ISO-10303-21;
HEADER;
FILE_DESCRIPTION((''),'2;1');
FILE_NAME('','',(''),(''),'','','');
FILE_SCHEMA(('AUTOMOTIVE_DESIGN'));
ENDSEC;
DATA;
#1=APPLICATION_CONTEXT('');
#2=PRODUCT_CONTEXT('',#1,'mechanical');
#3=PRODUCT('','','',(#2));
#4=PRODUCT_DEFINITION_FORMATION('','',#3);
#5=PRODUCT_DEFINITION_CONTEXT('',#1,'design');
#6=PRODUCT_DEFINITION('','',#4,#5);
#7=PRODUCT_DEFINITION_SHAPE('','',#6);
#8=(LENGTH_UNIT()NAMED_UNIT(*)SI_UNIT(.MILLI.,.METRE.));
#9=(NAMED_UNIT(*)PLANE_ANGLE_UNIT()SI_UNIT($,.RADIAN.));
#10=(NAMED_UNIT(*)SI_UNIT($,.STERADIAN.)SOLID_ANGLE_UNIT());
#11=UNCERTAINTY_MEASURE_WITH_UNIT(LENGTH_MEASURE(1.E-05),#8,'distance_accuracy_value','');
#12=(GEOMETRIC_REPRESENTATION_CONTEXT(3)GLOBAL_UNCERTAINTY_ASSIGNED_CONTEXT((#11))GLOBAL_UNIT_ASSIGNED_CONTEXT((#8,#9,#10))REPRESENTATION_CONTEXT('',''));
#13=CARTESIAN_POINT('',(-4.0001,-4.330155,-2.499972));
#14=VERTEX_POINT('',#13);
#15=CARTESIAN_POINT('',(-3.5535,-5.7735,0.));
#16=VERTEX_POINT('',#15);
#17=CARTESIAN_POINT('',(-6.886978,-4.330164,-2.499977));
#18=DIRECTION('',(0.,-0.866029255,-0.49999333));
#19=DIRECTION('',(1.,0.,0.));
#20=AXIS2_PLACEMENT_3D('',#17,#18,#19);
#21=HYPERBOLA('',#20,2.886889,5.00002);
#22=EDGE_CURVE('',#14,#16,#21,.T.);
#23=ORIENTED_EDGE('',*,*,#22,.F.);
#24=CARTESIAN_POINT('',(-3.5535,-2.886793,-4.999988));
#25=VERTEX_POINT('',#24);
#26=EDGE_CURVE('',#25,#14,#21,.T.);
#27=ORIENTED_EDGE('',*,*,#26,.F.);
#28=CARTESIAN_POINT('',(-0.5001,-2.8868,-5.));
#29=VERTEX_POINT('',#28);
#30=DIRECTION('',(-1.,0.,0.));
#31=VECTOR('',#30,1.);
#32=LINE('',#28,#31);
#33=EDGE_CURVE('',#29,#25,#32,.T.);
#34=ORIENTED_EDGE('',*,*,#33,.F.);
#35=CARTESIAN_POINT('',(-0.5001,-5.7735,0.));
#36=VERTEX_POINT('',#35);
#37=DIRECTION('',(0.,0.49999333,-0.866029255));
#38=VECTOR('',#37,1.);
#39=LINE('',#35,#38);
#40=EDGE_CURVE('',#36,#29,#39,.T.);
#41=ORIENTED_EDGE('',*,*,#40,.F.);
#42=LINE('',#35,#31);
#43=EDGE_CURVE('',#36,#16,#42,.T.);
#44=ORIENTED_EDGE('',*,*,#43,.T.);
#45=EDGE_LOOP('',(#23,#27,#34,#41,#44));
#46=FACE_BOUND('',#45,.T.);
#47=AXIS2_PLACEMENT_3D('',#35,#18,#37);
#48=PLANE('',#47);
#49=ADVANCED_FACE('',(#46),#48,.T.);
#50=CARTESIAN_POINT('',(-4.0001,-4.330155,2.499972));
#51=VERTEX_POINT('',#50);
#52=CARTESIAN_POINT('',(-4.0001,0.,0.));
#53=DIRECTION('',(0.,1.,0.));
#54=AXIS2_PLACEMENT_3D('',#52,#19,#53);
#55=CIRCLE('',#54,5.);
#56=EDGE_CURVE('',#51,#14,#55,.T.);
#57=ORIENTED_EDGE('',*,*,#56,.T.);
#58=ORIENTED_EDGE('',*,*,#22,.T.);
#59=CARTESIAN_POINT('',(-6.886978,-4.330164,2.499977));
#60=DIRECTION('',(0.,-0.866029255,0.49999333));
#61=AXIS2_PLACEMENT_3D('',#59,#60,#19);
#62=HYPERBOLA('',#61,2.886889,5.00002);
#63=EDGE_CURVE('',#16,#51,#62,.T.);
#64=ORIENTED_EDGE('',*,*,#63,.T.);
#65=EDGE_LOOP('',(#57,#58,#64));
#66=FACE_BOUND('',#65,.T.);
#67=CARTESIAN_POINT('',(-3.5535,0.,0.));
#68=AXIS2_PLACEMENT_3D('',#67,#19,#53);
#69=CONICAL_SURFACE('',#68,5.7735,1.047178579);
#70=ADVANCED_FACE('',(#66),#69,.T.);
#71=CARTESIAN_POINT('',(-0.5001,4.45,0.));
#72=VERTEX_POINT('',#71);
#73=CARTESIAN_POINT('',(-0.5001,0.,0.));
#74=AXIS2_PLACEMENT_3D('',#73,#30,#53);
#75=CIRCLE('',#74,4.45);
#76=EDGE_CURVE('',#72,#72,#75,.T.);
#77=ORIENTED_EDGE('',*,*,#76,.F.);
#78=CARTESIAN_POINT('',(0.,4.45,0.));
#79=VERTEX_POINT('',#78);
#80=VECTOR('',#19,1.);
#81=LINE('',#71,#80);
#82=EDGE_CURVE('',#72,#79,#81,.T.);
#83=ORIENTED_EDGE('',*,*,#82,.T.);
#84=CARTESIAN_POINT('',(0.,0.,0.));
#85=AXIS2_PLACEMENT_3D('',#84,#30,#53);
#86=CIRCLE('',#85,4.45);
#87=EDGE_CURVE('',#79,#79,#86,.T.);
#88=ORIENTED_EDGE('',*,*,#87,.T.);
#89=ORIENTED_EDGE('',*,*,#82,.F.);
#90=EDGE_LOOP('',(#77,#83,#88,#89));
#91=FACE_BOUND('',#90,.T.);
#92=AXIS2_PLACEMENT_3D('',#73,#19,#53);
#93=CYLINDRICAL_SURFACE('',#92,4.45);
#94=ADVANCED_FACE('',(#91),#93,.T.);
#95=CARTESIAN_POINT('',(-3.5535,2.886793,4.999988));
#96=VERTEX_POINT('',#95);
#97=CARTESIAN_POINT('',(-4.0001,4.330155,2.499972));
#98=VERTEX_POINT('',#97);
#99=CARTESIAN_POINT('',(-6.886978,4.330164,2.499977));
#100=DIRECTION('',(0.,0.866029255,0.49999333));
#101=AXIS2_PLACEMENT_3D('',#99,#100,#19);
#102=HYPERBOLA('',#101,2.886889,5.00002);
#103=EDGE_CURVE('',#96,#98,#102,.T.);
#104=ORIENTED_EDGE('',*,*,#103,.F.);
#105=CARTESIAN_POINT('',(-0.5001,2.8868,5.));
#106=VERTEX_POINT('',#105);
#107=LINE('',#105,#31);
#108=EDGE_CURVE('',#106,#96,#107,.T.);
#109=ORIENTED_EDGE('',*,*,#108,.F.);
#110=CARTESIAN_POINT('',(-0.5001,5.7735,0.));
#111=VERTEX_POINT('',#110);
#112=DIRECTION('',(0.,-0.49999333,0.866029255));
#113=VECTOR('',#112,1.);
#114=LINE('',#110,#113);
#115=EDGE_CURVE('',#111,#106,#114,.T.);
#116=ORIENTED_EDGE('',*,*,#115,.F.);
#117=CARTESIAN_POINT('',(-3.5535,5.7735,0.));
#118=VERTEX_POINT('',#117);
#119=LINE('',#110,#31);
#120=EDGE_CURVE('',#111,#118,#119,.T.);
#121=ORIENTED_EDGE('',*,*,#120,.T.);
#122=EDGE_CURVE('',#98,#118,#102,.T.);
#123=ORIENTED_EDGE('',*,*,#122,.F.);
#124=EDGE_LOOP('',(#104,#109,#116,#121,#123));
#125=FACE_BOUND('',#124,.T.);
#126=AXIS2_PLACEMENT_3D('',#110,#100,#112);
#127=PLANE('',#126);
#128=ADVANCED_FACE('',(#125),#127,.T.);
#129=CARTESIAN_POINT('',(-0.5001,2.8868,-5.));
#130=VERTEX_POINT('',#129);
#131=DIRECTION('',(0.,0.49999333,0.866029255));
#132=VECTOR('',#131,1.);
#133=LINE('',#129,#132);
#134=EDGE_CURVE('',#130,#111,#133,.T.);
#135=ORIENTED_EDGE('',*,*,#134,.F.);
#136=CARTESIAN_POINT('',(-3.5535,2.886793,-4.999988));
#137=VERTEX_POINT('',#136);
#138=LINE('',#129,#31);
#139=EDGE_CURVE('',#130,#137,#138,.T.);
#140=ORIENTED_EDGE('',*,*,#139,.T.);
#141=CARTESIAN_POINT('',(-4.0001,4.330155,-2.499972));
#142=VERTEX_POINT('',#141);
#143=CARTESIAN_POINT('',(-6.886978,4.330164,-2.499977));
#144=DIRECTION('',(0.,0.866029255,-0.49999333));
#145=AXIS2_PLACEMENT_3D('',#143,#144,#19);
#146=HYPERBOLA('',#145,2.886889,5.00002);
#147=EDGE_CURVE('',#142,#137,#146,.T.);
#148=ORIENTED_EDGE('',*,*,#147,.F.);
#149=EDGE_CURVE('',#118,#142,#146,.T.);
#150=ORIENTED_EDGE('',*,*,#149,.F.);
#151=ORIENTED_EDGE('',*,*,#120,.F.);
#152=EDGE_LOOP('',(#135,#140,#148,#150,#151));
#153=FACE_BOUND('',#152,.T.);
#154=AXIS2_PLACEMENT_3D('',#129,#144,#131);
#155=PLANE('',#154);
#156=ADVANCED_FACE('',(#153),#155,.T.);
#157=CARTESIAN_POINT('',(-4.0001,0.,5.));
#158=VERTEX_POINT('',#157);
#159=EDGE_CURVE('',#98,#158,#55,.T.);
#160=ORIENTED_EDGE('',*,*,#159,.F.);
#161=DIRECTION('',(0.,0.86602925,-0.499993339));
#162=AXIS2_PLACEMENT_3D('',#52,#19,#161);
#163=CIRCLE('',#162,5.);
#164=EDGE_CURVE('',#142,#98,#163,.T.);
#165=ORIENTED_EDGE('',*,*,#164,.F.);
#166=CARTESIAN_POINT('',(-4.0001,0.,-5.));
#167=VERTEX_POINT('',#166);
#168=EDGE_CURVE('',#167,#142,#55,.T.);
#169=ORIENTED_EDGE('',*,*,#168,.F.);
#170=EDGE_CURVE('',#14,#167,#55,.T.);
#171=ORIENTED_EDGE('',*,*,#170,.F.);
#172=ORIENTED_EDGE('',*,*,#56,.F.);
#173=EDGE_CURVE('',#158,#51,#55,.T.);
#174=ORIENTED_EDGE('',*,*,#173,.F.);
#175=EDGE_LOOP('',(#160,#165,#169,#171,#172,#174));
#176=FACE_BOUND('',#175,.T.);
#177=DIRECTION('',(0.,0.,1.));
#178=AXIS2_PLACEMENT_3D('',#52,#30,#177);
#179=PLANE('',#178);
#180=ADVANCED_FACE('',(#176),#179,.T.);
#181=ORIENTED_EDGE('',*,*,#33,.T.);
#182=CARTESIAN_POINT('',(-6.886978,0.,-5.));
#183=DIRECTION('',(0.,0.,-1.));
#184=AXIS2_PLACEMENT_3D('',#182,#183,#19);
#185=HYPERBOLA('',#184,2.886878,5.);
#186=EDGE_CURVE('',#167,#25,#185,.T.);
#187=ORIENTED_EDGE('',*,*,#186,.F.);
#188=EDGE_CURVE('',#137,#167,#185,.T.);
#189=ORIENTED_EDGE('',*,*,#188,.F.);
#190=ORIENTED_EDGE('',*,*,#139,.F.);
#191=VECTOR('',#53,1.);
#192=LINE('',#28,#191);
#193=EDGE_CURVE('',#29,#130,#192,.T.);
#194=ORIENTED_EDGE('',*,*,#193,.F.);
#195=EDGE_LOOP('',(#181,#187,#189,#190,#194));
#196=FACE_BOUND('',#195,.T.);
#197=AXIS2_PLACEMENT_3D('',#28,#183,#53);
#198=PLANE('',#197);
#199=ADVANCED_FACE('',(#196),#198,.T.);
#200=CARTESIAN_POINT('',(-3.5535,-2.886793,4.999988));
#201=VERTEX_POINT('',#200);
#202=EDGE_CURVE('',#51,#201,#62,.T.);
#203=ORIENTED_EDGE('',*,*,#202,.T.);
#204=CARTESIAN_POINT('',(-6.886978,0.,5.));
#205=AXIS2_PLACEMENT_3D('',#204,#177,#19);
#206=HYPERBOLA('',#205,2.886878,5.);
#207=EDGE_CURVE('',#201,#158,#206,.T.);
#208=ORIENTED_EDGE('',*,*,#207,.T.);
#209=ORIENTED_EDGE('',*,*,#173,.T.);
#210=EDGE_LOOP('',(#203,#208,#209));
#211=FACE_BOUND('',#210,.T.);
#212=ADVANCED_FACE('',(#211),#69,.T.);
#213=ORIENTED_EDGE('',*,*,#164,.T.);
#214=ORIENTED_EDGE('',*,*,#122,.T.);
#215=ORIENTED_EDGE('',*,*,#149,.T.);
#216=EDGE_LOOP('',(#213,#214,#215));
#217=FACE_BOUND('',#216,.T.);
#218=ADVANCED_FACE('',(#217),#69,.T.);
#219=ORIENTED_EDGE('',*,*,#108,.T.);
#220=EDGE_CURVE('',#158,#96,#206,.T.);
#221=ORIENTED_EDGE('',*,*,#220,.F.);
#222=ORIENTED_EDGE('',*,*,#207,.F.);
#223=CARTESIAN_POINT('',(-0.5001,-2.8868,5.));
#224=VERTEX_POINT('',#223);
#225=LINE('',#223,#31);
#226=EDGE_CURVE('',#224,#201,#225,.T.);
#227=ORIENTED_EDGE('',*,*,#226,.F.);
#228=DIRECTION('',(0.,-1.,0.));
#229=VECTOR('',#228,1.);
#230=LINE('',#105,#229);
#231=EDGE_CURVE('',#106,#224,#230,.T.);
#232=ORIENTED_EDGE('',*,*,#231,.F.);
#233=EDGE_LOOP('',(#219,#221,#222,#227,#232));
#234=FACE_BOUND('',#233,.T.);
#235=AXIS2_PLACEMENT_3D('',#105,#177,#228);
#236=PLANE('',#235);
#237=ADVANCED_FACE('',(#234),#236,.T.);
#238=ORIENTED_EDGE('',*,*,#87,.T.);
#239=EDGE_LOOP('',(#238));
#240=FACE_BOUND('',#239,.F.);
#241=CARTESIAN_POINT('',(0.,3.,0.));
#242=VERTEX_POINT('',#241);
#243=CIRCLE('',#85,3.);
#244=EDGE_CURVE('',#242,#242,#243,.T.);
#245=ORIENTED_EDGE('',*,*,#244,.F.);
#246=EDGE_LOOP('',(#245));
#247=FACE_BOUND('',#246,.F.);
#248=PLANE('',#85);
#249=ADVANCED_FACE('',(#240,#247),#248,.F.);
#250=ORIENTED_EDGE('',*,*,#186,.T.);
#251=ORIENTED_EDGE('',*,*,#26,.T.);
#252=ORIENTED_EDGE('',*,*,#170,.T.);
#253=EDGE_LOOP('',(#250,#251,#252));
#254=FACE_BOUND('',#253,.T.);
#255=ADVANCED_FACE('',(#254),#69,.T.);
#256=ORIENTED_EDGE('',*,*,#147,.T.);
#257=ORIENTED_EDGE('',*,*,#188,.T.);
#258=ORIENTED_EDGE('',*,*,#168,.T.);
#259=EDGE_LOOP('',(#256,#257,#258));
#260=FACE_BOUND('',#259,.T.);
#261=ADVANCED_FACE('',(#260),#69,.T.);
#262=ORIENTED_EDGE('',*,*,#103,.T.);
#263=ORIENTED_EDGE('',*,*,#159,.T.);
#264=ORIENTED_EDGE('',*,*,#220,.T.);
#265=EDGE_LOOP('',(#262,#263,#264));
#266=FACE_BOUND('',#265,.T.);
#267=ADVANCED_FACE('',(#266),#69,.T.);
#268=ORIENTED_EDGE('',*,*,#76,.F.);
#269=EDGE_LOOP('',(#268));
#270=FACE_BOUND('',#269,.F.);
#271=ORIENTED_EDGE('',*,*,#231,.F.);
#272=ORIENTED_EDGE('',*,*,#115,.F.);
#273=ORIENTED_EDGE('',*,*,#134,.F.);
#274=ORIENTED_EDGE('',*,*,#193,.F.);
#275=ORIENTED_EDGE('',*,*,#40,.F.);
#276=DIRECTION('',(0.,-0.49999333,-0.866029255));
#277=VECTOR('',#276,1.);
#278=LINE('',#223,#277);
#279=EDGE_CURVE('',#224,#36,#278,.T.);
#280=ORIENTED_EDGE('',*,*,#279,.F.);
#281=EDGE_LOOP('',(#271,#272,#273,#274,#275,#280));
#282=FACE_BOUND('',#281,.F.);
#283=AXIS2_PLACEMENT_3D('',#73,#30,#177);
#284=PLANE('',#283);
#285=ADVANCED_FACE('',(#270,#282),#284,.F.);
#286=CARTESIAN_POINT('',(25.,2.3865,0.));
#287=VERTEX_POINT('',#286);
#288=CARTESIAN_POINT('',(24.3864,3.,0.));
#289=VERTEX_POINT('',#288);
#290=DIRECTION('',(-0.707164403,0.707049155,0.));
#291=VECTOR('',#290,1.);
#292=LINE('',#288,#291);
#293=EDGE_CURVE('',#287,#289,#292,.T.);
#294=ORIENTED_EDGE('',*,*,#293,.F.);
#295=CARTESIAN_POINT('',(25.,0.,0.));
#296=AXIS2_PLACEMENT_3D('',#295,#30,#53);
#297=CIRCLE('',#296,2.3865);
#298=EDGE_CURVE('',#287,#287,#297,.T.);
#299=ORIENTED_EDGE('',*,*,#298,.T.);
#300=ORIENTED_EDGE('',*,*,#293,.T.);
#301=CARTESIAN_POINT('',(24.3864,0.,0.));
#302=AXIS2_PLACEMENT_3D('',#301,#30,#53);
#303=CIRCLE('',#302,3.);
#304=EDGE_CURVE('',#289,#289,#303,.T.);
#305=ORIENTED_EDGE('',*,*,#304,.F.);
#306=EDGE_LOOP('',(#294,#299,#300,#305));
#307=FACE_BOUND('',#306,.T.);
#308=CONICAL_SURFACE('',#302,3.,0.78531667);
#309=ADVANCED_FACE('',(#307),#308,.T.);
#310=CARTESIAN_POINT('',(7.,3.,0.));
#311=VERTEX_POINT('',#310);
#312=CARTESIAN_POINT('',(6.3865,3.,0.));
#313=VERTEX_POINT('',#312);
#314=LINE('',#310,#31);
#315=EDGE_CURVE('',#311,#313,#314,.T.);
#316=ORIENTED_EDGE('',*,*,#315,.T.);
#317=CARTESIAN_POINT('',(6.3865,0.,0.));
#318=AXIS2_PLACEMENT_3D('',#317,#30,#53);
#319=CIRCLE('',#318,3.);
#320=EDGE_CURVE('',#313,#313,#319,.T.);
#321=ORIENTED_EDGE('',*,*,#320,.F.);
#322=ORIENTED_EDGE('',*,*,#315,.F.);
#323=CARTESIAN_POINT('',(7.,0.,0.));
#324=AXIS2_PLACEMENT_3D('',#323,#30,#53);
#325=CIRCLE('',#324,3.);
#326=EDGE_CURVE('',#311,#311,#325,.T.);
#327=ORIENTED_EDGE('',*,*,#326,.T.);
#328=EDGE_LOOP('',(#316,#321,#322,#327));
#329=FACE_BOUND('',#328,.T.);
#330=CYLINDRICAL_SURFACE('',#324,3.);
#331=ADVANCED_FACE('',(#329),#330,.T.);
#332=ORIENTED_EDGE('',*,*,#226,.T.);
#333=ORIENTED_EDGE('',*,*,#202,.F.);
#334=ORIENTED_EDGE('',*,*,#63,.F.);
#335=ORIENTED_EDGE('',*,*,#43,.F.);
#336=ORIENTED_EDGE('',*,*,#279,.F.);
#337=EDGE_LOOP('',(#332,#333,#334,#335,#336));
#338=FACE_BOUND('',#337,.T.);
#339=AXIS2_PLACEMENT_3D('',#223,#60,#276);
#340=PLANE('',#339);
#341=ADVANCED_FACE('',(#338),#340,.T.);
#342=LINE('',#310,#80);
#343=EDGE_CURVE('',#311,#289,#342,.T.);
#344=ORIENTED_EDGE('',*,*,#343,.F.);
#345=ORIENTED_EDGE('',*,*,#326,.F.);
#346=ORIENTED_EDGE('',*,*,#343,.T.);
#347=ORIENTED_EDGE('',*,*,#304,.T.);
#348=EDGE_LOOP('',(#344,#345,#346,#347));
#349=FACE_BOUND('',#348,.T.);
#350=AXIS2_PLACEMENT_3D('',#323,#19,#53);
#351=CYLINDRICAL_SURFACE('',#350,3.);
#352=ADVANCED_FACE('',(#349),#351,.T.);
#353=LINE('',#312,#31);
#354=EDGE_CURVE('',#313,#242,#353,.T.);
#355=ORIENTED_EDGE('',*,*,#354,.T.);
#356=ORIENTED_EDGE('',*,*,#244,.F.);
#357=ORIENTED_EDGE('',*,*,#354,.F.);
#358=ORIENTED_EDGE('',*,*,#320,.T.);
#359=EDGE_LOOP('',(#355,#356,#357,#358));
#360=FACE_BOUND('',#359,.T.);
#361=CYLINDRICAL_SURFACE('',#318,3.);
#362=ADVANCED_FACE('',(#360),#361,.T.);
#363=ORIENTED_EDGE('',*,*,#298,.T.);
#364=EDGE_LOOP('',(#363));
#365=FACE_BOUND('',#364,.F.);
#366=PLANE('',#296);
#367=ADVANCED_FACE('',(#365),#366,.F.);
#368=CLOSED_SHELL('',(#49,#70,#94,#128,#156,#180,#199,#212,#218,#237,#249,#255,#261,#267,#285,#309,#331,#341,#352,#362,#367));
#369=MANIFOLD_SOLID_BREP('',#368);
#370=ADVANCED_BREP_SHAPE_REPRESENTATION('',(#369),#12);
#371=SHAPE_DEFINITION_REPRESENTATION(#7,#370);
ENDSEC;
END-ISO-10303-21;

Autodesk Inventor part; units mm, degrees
ref_plane "YZ Plane" through (0, 0, 0) normal (1, 0, 0) x (0, 1, 0)
ref_plane "XZ Plane" through (0, 0, 0) normal (0, 1, 0) x (-1, 0, 0)
sketch "Szkic1" plane through (0, 0, 0) normal (0, 0, 1) x (1, 0, 0)
  line L0 (0, 4.45) -> (0, 3)
  line L1 (7, 3) -> (25, 3)
  line L2 (25, 3) -> (25, 0)
  line L3 (25, 0) -> (-0.5001, 0)
  line L4 (-5.6001, 0) -> (30.1, 0) projected
  line L5 (-0.5001, 0) -> (-0.5001, 4.45)
  line L6 (-0.5001, 4.45) -> (0, 4.45)
  line L7 (7, 3) -> (6.3865, 3)
  line L8 (6.3865, 3) -> (0, 3)
  line L9 (0, -0.89) -> (0, 5.34) projected
  dimension "d0" = 25
  dimension "d1" = 18
  dimension "d2" = 6
  dimension "d9" = 0.5001
  dimension "d10" = 8.9
  dimension "d13" = 0.6136
  dimension "d14" = 6
revolve "Bryła" add sketch "Szkic1" angle 360 about axis through (25, 0, 0) along (-1, 0, 0)
sketch "Szkic2" plane through (-0.5001, 0, 0) normal (-1, 0, 0) x (0, 0, 1)
  line L0 (0, 5.7735) -> (5, 2.8868)
  line L1 (5, 2.8868) -> (5, -2.8868)
  line L2 (5, -2.8868) -> (0, -5.7735)
  line L3 (0, -5.7735) -> (-5, -2.8868)
  line L4 (-5, -2.8868) -> (-5, 2.8868)
  line L5 (-5, 2.8868) -> (0, 5.7735)
  point P0 (0, 0)
  point P1 (0, 0)
  dimension "d11" = 10
extrude "Głowica" add sketch "Szkic2" along normal blind 3.5
sketch "Szkic4" plane through (0, 0, 0) normal (0, 0, 1) x (1, 0, 0)
  line L0 (-4.0001, 5) -> (-4.0001, 5.7735)
  line L1 (-4.0001, 5.7735) -> (-3.5535, 5.7735)
  line L2 (-3.5535, 5.7735) -> (-4.0001, 5)
  line L3 (-4.7001, 0) -> (0.1999, 0) projected
  line L4 (-0.5001, 5.7735) -> (-4.0001, 5.7735) projected
  line L5 (-4.0001, 2.8868) -> (-4.0001, 5.7735) projected
  dimension "d5" = 30
  dimension "d19" = 10
revolve "Faza1" cut sketch "Szkic4" angle 360 about axis through (-10, 0, 0) along (1, 0, 0)
thread "Gwint" size "M6x1" class "6g" standard "ISO Metric profile" length 18
chamfer "Faza2" distance 0.6135 distance2 0.6136 1 edges at (25, -3, 0) measured on face at (25, 0.7776, 0.4238)
ref_plane "Work Plane1" through (1.525, 0, 0) normal (0, 0, 1) x (1, 0, 0)
equation "\"d11\" = SW"
equation "\"d3\" = KOH - SD"
equation "\"d15\" = GEL"
equation "\"d6\" = -0.5 * SPD + 0.5 * GD"
equation "\"d0\" = NLG"
equation "\"d1\" = GEL"
equation "\"d2\" = GD"
equation "\"d10\" = SD2"
equation "\"d14\" = BDM"
equation "\"d5\" = ANG1"
equation "\"d19\" = SW0"
equation "\"NLG\" = 25"
equation "\"GD\" = NND"
equation "\"BDM\" = NND"
equation "\"KOH\" = 4"
equation "\"GEL\" = 18"
equation "\"SW\" = 10"
equation "\"SW0\" = SW"
equation "\"SPD\" = NND - 1.2269 * PTC"
equation "\"SD2\" = 8.9"
equation "\"SD\" = 0.5"
equation "\"ANG1\" = 30deg"
equation "\"GAL\" = 0.61345 * PTC"
equation "\"GUL\" = 0.61345 * PTC"
equation "\"RR\" = 0.25"
equation "\"WFT\" = SD"
equation "\"GD1\" = THREADDIA - 1.2269 * PTC"
equation "\"THREADDIA\" = 6"
equation "\"SDH\" = 8.9"
equation "\"TOA\" = 30deg"
equation "\"FAWI\" = 45deg"
equation "\"PTC\" = 1"
equation "\"NND\" = 6"
equation "\"E0\" = 1.155 * SW"
properties part number "Śruba M6x25-8.8-A PN-85/M-82101" material "Stal, miękka"
